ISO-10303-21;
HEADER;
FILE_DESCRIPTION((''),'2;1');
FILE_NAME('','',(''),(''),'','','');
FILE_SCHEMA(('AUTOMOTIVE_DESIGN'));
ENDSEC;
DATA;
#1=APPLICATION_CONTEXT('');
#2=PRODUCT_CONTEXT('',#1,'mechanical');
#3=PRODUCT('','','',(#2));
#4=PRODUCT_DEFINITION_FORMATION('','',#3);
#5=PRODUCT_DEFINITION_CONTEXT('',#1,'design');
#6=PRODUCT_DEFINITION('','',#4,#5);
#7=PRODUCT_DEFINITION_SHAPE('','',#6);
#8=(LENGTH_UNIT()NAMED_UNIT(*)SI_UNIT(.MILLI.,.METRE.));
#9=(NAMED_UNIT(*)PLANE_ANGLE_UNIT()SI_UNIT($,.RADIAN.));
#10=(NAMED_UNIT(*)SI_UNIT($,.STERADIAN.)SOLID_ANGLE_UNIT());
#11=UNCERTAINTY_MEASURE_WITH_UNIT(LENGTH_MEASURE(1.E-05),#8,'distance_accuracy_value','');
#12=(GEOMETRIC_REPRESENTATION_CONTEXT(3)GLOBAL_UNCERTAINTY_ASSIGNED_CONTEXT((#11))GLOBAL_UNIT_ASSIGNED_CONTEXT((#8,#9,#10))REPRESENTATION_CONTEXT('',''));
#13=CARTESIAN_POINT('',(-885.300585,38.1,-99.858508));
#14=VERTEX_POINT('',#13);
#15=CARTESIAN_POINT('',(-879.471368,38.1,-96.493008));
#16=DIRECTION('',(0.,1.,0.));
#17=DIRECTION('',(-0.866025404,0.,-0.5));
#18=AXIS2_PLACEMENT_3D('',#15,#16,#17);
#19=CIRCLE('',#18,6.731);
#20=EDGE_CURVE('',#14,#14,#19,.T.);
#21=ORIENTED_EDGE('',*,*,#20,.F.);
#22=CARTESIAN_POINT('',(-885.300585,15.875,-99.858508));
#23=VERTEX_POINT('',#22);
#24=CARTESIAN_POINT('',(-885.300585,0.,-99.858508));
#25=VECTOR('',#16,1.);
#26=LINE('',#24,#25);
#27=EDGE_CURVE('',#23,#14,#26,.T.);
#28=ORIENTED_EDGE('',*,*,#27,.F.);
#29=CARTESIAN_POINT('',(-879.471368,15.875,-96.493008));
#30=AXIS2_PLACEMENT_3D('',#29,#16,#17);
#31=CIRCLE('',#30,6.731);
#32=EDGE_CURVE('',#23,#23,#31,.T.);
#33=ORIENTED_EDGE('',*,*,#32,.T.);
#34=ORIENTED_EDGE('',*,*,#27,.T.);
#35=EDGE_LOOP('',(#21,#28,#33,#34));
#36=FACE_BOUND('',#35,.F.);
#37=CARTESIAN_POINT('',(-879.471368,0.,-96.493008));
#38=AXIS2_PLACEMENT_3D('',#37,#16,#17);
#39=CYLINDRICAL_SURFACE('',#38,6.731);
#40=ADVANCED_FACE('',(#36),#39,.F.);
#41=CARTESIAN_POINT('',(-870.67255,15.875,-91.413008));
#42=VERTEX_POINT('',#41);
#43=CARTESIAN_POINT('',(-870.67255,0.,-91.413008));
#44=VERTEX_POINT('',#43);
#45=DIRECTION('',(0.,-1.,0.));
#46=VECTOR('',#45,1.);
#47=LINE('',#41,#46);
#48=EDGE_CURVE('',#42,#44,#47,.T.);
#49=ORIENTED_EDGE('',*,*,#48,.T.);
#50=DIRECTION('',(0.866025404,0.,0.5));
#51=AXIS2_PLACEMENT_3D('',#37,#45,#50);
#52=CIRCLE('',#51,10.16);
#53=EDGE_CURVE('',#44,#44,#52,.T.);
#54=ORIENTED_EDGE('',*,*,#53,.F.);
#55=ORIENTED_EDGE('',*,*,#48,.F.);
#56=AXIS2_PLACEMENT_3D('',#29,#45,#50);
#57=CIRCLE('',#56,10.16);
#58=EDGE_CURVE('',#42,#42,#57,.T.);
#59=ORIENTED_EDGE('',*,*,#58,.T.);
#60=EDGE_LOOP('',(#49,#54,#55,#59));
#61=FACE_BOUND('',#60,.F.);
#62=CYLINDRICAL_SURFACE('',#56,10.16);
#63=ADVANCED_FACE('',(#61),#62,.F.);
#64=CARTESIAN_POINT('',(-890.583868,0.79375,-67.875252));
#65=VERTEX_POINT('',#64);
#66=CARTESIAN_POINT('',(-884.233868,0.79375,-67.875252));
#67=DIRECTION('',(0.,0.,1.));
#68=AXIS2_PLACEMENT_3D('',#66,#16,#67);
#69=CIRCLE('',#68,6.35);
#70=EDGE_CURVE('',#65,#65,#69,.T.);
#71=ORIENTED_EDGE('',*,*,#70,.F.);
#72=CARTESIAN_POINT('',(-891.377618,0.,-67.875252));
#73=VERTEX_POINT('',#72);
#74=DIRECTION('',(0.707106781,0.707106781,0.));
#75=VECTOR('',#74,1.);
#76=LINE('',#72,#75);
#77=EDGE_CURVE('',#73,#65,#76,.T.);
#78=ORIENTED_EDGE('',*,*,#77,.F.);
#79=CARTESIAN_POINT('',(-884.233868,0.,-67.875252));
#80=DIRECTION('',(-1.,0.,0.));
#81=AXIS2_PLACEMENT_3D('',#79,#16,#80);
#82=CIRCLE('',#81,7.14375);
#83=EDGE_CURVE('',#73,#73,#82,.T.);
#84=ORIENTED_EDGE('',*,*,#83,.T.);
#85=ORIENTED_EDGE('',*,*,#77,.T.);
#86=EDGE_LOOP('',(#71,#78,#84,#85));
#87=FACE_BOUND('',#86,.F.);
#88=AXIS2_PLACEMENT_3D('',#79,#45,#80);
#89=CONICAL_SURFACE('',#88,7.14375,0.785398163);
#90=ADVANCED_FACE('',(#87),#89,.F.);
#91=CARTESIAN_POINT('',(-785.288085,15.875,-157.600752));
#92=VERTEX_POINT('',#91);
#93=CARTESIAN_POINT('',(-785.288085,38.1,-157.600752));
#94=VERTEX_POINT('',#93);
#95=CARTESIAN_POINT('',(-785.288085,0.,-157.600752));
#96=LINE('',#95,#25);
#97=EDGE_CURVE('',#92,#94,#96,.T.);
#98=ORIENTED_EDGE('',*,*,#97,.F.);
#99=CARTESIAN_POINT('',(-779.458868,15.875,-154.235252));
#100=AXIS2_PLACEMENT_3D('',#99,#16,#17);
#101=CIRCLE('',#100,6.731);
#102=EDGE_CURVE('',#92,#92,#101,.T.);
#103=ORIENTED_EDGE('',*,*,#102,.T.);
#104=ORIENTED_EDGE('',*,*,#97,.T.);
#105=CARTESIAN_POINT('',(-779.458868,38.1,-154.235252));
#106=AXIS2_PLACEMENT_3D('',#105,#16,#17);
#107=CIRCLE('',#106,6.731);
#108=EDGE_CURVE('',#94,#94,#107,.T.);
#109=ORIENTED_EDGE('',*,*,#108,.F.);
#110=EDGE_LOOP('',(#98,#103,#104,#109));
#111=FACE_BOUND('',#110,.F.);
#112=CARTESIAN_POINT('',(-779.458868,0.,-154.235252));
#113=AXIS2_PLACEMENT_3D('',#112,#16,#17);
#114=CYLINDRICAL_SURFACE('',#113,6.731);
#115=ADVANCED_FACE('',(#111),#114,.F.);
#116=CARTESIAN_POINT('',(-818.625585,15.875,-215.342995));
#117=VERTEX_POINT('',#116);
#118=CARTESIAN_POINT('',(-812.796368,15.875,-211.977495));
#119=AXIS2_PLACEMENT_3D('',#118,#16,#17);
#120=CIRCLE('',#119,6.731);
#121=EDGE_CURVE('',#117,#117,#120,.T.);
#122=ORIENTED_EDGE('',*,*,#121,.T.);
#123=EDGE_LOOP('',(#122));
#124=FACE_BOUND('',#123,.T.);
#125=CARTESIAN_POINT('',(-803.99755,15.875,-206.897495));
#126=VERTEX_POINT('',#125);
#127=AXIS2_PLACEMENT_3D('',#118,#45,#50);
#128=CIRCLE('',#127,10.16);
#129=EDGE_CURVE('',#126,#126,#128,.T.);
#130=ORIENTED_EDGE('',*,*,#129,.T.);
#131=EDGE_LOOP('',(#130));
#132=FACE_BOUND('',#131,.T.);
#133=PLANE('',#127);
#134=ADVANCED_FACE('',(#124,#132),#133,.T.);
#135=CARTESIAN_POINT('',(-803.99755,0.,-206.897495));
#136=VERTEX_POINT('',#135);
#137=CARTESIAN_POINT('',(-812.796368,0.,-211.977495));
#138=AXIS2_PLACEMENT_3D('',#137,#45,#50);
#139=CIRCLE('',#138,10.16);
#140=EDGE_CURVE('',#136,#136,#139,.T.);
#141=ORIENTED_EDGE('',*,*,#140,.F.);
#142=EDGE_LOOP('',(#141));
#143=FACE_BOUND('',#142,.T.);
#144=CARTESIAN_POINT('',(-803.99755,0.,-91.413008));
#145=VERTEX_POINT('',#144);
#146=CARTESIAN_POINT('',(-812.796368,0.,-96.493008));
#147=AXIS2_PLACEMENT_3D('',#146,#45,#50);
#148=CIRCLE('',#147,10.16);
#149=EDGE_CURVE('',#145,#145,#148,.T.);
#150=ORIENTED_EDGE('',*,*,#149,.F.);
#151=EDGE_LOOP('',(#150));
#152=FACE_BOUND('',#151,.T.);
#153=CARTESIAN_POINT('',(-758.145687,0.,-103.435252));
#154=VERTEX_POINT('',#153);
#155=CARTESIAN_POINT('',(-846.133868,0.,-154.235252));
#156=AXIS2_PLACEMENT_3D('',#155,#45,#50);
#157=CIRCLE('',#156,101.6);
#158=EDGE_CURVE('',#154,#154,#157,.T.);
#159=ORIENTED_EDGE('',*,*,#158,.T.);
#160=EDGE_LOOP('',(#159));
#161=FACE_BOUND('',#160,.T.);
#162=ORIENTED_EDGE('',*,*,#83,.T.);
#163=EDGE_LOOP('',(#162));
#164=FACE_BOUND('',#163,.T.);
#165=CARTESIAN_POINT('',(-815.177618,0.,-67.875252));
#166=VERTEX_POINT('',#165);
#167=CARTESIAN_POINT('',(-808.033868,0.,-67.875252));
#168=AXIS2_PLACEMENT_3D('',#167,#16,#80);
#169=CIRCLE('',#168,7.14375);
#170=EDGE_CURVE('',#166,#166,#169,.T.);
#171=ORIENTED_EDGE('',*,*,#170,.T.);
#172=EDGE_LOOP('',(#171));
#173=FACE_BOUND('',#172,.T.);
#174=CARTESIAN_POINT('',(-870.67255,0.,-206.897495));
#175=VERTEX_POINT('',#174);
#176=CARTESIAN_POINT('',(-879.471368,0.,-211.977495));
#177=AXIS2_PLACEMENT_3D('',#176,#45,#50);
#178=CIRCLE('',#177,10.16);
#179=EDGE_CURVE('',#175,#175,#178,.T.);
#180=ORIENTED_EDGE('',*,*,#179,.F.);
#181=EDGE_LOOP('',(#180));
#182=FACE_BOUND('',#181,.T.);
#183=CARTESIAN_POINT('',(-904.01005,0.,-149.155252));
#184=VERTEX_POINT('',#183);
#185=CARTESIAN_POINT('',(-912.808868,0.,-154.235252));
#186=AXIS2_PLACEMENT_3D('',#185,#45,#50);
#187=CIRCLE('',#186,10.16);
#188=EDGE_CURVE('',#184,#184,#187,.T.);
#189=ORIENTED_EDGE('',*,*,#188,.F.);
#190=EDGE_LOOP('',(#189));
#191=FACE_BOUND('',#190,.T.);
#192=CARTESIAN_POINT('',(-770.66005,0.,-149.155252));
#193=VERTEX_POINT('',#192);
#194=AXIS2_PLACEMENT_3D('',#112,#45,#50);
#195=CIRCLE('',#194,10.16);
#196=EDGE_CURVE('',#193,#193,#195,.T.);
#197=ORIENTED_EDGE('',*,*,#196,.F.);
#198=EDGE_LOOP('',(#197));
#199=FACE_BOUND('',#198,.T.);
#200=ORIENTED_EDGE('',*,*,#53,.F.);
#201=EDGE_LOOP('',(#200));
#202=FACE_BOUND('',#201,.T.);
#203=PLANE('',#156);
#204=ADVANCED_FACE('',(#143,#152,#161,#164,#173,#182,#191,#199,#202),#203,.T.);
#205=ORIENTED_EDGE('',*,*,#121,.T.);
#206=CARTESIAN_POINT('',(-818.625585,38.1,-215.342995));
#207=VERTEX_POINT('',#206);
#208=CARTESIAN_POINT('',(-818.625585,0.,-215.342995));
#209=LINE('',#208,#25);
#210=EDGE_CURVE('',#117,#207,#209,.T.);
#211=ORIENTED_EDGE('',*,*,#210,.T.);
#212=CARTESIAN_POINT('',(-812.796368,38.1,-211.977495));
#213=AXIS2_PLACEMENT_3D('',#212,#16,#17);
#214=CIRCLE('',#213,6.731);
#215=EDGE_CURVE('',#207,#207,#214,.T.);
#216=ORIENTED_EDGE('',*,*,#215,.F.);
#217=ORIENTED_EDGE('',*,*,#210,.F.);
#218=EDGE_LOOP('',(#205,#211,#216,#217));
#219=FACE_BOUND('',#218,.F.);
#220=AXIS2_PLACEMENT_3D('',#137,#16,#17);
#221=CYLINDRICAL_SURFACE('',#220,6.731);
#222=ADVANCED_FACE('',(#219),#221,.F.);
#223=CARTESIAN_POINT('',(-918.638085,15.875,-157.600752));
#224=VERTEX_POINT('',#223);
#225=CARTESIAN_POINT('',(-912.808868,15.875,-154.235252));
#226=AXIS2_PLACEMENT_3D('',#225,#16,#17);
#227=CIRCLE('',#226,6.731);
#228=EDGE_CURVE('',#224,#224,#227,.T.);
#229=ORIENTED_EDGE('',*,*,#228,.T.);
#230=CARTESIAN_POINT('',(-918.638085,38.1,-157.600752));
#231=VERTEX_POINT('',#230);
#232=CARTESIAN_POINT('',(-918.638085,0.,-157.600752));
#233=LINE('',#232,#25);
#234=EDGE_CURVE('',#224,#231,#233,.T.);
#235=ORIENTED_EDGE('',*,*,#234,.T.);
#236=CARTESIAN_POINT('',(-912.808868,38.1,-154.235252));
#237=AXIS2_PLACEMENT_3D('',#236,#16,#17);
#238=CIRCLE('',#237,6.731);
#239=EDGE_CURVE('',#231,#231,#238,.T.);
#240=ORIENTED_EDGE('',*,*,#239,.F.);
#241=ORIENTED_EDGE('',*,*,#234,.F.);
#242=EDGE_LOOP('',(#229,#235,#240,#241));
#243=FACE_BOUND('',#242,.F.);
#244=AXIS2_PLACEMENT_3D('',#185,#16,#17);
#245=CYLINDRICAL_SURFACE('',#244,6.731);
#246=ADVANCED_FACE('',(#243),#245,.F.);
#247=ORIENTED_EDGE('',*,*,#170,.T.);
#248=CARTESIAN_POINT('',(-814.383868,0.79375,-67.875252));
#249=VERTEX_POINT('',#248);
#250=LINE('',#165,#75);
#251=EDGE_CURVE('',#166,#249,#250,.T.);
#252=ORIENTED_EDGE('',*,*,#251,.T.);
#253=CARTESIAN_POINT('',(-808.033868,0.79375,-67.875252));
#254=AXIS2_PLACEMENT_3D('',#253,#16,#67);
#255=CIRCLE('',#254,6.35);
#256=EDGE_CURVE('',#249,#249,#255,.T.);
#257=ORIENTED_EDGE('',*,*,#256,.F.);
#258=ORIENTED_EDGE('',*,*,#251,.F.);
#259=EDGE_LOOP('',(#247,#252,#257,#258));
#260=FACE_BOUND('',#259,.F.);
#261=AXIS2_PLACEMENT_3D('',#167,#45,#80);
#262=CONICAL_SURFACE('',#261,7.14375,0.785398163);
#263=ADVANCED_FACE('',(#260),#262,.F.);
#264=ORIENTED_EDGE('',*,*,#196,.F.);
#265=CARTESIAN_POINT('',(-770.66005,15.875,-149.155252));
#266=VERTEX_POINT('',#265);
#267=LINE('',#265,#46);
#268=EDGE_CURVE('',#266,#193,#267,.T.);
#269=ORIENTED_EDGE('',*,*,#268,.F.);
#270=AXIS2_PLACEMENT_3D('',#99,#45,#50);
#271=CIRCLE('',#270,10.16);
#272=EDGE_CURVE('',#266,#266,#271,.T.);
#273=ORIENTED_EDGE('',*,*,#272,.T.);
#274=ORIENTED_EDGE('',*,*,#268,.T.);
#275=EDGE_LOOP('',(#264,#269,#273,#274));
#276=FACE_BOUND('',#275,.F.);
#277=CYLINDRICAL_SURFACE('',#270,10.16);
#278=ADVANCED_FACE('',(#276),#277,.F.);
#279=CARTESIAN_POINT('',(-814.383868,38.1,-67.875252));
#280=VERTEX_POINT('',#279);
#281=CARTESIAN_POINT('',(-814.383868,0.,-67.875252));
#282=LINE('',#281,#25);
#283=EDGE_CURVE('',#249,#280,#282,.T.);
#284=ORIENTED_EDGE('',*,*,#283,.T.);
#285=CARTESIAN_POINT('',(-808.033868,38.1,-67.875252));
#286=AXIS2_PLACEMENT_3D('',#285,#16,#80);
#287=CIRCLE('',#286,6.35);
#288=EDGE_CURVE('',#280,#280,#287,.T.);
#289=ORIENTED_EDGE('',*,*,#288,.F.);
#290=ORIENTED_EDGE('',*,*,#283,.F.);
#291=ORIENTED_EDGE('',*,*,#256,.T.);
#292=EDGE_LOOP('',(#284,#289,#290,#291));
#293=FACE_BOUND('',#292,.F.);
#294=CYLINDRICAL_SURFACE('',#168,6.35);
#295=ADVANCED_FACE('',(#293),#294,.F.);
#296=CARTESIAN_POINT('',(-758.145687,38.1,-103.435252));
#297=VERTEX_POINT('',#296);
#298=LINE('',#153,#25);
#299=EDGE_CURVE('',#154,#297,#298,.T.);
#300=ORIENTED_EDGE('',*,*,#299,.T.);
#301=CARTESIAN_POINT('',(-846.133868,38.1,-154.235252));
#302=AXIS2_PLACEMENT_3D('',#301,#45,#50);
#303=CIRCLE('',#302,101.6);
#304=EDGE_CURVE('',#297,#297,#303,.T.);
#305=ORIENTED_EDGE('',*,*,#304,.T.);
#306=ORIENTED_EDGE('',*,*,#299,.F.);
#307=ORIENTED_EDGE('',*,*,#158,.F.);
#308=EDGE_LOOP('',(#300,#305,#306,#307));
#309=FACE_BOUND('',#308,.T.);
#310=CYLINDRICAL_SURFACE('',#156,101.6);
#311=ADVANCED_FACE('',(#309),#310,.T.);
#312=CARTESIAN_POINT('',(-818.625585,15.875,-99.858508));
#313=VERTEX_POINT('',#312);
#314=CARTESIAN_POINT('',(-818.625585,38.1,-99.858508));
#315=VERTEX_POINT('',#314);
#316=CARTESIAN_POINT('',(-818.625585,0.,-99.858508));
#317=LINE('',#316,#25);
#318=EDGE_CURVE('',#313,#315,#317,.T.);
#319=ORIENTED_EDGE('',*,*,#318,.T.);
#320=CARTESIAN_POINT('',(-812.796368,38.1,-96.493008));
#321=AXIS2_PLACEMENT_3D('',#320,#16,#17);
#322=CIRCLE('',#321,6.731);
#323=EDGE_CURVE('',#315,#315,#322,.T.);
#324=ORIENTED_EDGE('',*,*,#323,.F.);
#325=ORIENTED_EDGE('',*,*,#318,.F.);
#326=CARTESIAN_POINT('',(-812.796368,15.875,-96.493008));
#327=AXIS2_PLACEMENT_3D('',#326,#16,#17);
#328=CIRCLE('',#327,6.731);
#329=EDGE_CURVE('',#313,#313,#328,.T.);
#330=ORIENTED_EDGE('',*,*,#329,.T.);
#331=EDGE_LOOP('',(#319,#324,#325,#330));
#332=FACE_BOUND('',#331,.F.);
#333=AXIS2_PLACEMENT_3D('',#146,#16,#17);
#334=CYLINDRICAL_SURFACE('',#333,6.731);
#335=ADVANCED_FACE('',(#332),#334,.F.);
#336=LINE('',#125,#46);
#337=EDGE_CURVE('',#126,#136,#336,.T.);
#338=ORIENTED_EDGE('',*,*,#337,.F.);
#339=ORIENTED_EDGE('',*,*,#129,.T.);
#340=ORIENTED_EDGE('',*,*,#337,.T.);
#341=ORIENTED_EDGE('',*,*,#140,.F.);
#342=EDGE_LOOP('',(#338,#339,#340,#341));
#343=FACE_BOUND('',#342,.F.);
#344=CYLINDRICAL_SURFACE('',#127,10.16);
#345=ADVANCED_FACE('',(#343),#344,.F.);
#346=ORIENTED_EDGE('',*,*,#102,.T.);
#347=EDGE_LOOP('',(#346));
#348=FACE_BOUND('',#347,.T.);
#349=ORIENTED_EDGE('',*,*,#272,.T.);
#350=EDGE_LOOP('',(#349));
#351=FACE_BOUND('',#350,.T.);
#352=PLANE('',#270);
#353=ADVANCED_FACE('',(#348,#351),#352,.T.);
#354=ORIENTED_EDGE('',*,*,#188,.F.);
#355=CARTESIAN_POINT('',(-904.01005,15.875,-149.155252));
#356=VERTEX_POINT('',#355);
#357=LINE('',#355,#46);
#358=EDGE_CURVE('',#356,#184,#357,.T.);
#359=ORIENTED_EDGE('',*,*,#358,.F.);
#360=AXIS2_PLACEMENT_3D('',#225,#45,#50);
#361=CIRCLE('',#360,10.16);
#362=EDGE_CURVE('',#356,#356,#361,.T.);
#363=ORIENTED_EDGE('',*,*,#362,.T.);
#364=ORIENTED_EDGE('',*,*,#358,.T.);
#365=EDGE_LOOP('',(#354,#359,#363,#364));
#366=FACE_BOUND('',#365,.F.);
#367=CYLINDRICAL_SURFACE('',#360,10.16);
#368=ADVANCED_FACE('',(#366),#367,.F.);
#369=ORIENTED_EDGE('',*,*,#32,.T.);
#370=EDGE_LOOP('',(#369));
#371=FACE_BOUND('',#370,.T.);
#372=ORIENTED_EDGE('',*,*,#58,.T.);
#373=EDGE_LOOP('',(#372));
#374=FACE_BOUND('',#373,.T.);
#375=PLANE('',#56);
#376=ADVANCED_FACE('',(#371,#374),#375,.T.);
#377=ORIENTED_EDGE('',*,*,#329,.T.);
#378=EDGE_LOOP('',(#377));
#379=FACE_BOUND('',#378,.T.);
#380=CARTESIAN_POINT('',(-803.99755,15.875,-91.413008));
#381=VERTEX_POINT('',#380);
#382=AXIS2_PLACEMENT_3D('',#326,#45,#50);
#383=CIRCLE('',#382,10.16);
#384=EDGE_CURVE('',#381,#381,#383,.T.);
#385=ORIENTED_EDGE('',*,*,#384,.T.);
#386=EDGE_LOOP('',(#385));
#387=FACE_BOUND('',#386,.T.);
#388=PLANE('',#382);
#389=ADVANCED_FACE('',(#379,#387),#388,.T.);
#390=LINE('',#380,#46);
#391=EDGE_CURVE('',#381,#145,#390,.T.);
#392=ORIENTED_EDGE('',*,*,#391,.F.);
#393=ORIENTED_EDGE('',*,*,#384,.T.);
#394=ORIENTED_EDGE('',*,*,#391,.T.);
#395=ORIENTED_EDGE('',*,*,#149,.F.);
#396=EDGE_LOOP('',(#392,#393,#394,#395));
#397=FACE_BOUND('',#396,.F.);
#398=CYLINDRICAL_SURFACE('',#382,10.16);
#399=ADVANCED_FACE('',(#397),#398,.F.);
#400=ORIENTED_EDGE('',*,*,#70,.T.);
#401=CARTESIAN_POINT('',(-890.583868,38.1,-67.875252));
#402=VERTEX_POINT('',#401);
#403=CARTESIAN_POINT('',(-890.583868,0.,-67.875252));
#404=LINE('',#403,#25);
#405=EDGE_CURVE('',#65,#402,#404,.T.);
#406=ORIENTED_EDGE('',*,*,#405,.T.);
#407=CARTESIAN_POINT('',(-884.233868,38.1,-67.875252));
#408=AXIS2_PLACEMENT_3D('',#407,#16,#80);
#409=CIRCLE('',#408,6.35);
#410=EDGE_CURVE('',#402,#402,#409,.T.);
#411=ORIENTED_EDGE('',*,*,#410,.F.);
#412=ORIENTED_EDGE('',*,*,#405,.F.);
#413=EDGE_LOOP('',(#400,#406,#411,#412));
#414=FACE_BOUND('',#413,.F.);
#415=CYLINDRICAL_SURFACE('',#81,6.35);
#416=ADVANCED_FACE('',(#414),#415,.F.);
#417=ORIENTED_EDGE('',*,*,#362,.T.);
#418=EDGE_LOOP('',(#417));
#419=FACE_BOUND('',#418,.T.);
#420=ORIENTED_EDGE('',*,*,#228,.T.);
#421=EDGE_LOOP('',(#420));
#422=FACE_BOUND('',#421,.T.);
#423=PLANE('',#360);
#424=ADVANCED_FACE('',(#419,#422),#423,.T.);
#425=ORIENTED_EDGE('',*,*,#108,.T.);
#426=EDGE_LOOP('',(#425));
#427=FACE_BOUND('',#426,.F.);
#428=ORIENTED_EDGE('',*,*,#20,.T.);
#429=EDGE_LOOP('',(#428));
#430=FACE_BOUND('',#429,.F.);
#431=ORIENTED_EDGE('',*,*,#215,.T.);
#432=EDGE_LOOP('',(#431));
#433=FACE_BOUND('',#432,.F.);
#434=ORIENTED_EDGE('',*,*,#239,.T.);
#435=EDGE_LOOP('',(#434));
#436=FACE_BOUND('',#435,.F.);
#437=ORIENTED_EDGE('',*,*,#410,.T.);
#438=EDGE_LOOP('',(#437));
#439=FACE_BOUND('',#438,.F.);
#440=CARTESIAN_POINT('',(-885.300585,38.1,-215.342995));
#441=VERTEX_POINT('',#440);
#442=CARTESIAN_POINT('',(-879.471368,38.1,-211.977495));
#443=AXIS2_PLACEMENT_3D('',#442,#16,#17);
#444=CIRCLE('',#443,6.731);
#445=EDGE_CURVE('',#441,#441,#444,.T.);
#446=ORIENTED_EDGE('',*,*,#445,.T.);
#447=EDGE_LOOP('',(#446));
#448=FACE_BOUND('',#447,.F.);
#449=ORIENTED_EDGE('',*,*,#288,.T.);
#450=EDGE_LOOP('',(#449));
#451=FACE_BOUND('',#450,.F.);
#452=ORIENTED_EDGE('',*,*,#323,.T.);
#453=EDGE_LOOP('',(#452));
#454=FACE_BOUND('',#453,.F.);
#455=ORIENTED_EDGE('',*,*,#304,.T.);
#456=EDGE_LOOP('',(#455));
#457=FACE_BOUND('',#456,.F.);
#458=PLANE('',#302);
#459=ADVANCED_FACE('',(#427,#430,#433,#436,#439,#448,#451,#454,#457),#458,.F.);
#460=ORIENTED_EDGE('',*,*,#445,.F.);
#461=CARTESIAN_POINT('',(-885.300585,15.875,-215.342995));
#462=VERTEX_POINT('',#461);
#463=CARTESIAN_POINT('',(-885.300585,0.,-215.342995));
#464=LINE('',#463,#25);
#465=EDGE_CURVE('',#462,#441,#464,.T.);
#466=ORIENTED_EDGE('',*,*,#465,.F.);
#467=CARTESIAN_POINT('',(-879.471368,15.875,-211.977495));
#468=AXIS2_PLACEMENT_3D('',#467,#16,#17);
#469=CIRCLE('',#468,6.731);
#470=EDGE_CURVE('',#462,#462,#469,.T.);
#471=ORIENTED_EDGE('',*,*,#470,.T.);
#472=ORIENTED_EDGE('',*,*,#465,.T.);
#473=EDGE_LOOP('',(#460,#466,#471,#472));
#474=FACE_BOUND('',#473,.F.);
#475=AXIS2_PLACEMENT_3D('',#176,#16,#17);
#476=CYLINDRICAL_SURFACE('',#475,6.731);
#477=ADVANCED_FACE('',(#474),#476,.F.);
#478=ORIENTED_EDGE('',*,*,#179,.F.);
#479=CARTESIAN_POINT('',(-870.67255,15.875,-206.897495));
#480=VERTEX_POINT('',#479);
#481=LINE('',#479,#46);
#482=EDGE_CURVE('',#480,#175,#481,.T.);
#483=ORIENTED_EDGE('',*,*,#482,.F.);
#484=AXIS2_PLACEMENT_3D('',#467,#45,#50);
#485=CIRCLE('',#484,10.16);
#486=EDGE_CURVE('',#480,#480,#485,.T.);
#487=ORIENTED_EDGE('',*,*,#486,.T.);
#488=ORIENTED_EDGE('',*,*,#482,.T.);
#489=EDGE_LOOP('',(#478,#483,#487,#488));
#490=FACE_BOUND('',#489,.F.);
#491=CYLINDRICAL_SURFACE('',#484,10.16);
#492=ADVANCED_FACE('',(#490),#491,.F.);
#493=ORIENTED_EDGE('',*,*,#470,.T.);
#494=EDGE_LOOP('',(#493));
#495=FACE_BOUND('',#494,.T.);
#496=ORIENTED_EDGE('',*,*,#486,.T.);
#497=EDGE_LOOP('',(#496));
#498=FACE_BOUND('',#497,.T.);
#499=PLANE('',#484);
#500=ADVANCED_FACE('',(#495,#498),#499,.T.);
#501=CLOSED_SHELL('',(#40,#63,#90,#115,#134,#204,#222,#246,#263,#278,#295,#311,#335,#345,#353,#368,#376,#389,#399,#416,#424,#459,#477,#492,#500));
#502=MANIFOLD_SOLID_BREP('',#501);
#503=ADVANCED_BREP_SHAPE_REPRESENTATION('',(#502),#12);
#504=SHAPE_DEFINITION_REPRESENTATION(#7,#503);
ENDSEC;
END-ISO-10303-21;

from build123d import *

# Parameters (mm, degrees)
F0_R           = 101.6
F1_DEPTH       = 38.1
F2_D           = 13.462
F2_DEPTH       = 50.8
F2_CBORE_D     = 20.32
F2_CBORE_DEPTH = 15.875
F2_TIP         = 4.0443928267
F3_D           = 13.462
F3_DEPTH       = 50.8
F3_CBORE_D     = 20.32
F3_CBORE_DEPTH = 15.875
F3_TIP         = 4.0443928267
F4_ANGLE       = 30
F6_D           = 12.7
F6_DEPTH       = 50.8
F6_CSINK_D     = 14.2875
F6_CSINK_ANGLE = 90
F6_TIP         = 3.8154649308


# Not quite as in the source:
# - a feature names something its author has since deleted; it is built from what else it names


with BuildPart() as f1:
    # F0 (on Front) → F1 (new body)
    with BuildSketch(Plane.XZ):
        Circle(F0_R)
    extrude(amount=-F1_DEPTH)

    # F2
    with Locations(Plane.XZ):
        with Locations((0, 66.675)):
            CounterBoreHole(F2_D / 2, F2_CBORE_D / 2, F2_CBORE_DEPTH, depth=F2_DEPTH)
            with Locations((0, 0, -(F2_DEPTH + F2_TIP / 2))):  # 118° drill point
                Cone(0, F2_D / 2, F2_TIP, mode=Mode.SUBTRACT)

    # F3
    with Locations(Plane.XZ):
        with Locations((-57.7422437973, 33.3375), (-57.7422437973, -33.3375), (0, -66.675), (57.7422437973, -33.3375), (57.7422437973, 33.3375)):
            CounterBoreHole(F3_D / 2, F3_CBORE_D / 2, F3_CBORE_DEPTH, depth=F3_DEPTH)
            with Locations((0, 0, -(F3_DEPTH + F3_TIP / 2))):  # 118° drill point
                Cone(0, F3_D / 2, F3_TIP, mode=Mode.SUBTRACT)


with BuildPart() as f1_1:
    # F4: moved
    add(f1.part.rotate(Axis((0, 0, 0), (0, -1, 0)), F4_ANGLE))


with BuildPart() as f1_2:
    # F5: moved
    add(f1_1.part.moved(Location((-846.1338678, 0, -154.2352516))))

    # F6
    with Locations(Plane.XZ):
        with Locations((-884.2338678, -67.8752516), (-808.0338678, -67.8752516)):
            CounterSinkHole(F6_D / 2, F6_CSINK_D / 2, depth=F6_DEPTH, counter_sink_angle=F6_CSINK_ANGLE)
            with Locations((0, 0, -(F6_DEPTH + F6_TIP / 2))):  # 118° drill point
                Cone(0, F6_D / 2, F6_TIP, mode=Mode.SUBTRACT)


solid = f1_2.part
